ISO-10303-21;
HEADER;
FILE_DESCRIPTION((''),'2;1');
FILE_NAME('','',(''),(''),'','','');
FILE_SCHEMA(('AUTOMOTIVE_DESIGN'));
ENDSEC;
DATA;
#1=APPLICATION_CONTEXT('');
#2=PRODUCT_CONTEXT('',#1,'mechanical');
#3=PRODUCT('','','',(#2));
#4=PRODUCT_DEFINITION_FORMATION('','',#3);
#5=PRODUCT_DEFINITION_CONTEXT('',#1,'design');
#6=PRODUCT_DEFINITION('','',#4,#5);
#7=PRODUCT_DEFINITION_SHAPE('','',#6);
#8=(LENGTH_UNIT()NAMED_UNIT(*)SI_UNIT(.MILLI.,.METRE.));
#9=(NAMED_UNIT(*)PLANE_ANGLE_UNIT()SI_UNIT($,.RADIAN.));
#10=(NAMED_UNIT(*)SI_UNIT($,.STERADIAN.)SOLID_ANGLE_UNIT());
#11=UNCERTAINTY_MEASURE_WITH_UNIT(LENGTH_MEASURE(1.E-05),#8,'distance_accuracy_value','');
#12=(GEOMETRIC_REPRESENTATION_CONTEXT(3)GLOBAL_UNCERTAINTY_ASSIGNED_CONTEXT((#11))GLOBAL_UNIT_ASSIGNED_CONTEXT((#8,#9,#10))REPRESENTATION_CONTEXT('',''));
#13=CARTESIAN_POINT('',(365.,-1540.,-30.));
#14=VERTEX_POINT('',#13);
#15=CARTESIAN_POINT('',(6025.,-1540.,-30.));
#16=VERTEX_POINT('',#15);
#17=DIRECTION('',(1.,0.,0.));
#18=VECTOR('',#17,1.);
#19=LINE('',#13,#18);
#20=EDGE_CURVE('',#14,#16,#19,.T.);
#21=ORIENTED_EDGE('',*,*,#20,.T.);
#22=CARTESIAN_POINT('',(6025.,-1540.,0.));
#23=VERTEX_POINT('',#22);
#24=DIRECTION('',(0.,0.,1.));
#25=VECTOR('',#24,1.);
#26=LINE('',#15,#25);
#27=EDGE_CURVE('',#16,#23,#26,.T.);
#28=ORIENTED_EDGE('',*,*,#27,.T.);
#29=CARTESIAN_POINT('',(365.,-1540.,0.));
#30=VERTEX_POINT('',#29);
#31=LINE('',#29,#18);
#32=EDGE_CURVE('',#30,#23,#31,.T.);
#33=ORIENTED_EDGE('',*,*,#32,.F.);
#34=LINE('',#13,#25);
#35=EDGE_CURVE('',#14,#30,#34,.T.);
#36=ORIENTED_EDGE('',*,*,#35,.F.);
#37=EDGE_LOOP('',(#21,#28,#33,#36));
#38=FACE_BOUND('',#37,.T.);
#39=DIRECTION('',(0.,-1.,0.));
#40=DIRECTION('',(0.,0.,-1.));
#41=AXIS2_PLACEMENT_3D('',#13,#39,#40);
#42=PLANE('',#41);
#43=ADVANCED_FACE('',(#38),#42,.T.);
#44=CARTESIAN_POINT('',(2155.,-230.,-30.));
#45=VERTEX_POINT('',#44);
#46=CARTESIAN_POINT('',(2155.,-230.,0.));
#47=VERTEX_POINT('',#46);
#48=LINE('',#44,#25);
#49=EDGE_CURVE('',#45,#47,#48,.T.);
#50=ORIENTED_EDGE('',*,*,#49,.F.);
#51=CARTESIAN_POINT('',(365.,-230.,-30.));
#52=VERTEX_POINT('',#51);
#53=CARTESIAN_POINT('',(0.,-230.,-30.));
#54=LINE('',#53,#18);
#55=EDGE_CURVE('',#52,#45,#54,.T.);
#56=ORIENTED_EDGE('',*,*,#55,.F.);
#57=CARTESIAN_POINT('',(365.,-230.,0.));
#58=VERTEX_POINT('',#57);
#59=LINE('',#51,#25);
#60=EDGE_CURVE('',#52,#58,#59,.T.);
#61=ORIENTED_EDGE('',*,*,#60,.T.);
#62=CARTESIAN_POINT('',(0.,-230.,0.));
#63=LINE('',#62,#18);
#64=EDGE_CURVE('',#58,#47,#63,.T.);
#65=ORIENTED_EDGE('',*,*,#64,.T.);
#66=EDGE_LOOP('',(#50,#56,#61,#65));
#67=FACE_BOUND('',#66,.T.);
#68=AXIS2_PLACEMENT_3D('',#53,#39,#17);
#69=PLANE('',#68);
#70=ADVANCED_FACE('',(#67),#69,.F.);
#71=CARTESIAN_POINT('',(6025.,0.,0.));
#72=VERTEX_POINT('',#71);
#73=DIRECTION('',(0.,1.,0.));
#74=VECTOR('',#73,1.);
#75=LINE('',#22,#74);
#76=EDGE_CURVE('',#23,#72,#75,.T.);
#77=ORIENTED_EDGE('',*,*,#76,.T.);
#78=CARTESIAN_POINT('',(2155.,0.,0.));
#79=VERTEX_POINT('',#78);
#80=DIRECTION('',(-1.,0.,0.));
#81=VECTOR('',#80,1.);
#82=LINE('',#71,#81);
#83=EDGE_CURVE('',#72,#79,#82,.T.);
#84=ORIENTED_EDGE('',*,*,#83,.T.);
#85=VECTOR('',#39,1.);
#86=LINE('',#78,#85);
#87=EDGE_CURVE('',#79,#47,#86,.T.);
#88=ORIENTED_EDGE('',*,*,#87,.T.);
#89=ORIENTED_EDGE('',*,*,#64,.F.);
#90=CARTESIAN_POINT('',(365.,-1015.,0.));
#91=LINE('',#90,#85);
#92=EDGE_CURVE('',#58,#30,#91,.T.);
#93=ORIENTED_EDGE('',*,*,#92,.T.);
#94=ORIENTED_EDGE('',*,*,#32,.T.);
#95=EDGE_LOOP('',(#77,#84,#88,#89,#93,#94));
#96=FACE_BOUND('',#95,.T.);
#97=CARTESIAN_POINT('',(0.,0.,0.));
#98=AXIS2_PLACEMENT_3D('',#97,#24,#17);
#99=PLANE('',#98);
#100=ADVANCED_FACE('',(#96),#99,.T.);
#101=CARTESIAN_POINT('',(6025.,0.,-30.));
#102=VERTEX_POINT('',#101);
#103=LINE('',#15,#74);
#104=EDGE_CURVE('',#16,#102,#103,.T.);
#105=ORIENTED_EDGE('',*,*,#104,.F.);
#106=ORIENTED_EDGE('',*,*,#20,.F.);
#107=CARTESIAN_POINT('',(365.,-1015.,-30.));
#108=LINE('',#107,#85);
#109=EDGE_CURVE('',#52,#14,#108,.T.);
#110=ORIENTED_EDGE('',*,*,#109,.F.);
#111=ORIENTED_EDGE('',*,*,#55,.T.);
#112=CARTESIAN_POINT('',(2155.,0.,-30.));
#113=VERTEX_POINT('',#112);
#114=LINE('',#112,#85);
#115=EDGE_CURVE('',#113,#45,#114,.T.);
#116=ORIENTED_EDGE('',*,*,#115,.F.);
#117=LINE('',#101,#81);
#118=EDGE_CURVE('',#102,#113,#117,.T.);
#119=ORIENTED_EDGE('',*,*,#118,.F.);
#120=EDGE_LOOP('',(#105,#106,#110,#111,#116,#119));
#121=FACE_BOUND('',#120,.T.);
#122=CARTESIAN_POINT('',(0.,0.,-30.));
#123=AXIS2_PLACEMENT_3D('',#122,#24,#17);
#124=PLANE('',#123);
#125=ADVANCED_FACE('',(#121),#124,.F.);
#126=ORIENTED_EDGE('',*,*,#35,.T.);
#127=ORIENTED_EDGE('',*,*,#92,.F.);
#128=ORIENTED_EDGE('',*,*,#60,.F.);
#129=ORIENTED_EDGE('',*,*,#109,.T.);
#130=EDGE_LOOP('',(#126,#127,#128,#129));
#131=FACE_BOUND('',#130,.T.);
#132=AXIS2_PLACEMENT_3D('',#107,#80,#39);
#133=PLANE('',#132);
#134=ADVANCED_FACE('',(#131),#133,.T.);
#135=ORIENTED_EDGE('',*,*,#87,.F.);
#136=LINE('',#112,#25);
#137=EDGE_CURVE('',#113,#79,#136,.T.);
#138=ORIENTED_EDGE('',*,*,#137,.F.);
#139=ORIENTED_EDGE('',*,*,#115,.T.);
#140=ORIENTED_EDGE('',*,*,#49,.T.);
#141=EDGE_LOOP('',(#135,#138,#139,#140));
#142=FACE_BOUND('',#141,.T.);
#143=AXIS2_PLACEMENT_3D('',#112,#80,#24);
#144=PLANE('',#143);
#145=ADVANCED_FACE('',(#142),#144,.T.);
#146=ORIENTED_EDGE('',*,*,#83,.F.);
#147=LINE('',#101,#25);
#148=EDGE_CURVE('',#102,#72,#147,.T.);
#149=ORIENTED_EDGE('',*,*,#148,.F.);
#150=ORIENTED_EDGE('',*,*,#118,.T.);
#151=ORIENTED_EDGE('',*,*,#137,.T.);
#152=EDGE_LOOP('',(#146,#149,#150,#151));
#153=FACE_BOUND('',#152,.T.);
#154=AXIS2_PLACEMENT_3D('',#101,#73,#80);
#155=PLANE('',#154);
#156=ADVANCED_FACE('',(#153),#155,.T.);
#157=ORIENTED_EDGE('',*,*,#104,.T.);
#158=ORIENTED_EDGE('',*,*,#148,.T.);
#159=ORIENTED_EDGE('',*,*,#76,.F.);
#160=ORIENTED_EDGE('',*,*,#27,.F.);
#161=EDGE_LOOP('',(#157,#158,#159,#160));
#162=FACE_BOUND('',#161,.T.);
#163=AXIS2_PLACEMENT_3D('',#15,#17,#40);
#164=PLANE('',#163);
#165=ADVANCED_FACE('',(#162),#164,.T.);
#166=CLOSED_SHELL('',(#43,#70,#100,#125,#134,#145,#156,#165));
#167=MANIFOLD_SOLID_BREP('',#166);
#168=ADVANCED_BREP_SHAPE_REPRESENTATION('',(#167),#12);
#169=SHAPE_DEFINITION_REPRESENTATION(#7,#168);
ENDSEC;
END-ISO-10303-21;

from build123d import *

# Parameters (mm, degrees)
TABAN_FLAN_1_DEPTH         = 30
KES_EKSTR_ZYON1_DEPTH      = 6219.771984886
KES_EKSTR_ZYON1_DEPTH_BACK = 6219.771984886
IZIM2_W                    = 365
IZIM2_H                    = 658
KES_EKSTR_ZYON2_DEPTH      = 6219.771984886
KES_EKSTR_ZYON2_DEPTH_BACK = 6219.771984886
IZIM3_W                    = 365
IZIM3_H                    = 127


# Sheet-metal steps are written as plain solids
with BuildPart() as part:
    # Çizim1 → Taban-Flanş1 (new body)
    with BuildSketch(Plane.XY):
        Polygon((0, 0), (0, -1015), (365, -1015), (365, -1540), (6025, -1540), (6025, 0), align=None)
    extrude(amount=-TABAN_FLAN_1_DEPTH)

    # Çizim2 → Kes-Ekstrüzyon1 (cut, two sides: drawn at the far end of the back side and taken through both)
    with BuildSketch(Plane.XY.offset(-KES_EKSTR_ZYON1_DEPTH_BACK)):
        with Locations((182.5, -686)):
            Rectangle(IZIM2_W, IZIM2_H)
    extrude(amount=KES_EKSTR_ZYON1_DEPTH + KES_EKSTR_ZYON1_DEPTH_BACK, mode=Mode.SUBTRACT)

    # Çizim3 → Kes-Ekstrüzyon2 (cut, two sides: drawn at the far end of the back side and taken through both)
    with BuildSketch(Plane.XY.offset(-KES_EKSTR_ZYON2_DEPTH_BACK)):
        with Locations((182.5, -293.5)):
            Rectangle(IZIM3_W, IZIM3_H)
        Polygon((2155, 0), (0, 0), (0, -230), (365, -230), (2155, -230), align=None)
    extrude(amount=KES_EKSTR_ZYON2_DEPTH + KES_EKSTR_ZYON2_DEPTH_BACK, mode=Mode.SUBTRACT)


solid = part.part
